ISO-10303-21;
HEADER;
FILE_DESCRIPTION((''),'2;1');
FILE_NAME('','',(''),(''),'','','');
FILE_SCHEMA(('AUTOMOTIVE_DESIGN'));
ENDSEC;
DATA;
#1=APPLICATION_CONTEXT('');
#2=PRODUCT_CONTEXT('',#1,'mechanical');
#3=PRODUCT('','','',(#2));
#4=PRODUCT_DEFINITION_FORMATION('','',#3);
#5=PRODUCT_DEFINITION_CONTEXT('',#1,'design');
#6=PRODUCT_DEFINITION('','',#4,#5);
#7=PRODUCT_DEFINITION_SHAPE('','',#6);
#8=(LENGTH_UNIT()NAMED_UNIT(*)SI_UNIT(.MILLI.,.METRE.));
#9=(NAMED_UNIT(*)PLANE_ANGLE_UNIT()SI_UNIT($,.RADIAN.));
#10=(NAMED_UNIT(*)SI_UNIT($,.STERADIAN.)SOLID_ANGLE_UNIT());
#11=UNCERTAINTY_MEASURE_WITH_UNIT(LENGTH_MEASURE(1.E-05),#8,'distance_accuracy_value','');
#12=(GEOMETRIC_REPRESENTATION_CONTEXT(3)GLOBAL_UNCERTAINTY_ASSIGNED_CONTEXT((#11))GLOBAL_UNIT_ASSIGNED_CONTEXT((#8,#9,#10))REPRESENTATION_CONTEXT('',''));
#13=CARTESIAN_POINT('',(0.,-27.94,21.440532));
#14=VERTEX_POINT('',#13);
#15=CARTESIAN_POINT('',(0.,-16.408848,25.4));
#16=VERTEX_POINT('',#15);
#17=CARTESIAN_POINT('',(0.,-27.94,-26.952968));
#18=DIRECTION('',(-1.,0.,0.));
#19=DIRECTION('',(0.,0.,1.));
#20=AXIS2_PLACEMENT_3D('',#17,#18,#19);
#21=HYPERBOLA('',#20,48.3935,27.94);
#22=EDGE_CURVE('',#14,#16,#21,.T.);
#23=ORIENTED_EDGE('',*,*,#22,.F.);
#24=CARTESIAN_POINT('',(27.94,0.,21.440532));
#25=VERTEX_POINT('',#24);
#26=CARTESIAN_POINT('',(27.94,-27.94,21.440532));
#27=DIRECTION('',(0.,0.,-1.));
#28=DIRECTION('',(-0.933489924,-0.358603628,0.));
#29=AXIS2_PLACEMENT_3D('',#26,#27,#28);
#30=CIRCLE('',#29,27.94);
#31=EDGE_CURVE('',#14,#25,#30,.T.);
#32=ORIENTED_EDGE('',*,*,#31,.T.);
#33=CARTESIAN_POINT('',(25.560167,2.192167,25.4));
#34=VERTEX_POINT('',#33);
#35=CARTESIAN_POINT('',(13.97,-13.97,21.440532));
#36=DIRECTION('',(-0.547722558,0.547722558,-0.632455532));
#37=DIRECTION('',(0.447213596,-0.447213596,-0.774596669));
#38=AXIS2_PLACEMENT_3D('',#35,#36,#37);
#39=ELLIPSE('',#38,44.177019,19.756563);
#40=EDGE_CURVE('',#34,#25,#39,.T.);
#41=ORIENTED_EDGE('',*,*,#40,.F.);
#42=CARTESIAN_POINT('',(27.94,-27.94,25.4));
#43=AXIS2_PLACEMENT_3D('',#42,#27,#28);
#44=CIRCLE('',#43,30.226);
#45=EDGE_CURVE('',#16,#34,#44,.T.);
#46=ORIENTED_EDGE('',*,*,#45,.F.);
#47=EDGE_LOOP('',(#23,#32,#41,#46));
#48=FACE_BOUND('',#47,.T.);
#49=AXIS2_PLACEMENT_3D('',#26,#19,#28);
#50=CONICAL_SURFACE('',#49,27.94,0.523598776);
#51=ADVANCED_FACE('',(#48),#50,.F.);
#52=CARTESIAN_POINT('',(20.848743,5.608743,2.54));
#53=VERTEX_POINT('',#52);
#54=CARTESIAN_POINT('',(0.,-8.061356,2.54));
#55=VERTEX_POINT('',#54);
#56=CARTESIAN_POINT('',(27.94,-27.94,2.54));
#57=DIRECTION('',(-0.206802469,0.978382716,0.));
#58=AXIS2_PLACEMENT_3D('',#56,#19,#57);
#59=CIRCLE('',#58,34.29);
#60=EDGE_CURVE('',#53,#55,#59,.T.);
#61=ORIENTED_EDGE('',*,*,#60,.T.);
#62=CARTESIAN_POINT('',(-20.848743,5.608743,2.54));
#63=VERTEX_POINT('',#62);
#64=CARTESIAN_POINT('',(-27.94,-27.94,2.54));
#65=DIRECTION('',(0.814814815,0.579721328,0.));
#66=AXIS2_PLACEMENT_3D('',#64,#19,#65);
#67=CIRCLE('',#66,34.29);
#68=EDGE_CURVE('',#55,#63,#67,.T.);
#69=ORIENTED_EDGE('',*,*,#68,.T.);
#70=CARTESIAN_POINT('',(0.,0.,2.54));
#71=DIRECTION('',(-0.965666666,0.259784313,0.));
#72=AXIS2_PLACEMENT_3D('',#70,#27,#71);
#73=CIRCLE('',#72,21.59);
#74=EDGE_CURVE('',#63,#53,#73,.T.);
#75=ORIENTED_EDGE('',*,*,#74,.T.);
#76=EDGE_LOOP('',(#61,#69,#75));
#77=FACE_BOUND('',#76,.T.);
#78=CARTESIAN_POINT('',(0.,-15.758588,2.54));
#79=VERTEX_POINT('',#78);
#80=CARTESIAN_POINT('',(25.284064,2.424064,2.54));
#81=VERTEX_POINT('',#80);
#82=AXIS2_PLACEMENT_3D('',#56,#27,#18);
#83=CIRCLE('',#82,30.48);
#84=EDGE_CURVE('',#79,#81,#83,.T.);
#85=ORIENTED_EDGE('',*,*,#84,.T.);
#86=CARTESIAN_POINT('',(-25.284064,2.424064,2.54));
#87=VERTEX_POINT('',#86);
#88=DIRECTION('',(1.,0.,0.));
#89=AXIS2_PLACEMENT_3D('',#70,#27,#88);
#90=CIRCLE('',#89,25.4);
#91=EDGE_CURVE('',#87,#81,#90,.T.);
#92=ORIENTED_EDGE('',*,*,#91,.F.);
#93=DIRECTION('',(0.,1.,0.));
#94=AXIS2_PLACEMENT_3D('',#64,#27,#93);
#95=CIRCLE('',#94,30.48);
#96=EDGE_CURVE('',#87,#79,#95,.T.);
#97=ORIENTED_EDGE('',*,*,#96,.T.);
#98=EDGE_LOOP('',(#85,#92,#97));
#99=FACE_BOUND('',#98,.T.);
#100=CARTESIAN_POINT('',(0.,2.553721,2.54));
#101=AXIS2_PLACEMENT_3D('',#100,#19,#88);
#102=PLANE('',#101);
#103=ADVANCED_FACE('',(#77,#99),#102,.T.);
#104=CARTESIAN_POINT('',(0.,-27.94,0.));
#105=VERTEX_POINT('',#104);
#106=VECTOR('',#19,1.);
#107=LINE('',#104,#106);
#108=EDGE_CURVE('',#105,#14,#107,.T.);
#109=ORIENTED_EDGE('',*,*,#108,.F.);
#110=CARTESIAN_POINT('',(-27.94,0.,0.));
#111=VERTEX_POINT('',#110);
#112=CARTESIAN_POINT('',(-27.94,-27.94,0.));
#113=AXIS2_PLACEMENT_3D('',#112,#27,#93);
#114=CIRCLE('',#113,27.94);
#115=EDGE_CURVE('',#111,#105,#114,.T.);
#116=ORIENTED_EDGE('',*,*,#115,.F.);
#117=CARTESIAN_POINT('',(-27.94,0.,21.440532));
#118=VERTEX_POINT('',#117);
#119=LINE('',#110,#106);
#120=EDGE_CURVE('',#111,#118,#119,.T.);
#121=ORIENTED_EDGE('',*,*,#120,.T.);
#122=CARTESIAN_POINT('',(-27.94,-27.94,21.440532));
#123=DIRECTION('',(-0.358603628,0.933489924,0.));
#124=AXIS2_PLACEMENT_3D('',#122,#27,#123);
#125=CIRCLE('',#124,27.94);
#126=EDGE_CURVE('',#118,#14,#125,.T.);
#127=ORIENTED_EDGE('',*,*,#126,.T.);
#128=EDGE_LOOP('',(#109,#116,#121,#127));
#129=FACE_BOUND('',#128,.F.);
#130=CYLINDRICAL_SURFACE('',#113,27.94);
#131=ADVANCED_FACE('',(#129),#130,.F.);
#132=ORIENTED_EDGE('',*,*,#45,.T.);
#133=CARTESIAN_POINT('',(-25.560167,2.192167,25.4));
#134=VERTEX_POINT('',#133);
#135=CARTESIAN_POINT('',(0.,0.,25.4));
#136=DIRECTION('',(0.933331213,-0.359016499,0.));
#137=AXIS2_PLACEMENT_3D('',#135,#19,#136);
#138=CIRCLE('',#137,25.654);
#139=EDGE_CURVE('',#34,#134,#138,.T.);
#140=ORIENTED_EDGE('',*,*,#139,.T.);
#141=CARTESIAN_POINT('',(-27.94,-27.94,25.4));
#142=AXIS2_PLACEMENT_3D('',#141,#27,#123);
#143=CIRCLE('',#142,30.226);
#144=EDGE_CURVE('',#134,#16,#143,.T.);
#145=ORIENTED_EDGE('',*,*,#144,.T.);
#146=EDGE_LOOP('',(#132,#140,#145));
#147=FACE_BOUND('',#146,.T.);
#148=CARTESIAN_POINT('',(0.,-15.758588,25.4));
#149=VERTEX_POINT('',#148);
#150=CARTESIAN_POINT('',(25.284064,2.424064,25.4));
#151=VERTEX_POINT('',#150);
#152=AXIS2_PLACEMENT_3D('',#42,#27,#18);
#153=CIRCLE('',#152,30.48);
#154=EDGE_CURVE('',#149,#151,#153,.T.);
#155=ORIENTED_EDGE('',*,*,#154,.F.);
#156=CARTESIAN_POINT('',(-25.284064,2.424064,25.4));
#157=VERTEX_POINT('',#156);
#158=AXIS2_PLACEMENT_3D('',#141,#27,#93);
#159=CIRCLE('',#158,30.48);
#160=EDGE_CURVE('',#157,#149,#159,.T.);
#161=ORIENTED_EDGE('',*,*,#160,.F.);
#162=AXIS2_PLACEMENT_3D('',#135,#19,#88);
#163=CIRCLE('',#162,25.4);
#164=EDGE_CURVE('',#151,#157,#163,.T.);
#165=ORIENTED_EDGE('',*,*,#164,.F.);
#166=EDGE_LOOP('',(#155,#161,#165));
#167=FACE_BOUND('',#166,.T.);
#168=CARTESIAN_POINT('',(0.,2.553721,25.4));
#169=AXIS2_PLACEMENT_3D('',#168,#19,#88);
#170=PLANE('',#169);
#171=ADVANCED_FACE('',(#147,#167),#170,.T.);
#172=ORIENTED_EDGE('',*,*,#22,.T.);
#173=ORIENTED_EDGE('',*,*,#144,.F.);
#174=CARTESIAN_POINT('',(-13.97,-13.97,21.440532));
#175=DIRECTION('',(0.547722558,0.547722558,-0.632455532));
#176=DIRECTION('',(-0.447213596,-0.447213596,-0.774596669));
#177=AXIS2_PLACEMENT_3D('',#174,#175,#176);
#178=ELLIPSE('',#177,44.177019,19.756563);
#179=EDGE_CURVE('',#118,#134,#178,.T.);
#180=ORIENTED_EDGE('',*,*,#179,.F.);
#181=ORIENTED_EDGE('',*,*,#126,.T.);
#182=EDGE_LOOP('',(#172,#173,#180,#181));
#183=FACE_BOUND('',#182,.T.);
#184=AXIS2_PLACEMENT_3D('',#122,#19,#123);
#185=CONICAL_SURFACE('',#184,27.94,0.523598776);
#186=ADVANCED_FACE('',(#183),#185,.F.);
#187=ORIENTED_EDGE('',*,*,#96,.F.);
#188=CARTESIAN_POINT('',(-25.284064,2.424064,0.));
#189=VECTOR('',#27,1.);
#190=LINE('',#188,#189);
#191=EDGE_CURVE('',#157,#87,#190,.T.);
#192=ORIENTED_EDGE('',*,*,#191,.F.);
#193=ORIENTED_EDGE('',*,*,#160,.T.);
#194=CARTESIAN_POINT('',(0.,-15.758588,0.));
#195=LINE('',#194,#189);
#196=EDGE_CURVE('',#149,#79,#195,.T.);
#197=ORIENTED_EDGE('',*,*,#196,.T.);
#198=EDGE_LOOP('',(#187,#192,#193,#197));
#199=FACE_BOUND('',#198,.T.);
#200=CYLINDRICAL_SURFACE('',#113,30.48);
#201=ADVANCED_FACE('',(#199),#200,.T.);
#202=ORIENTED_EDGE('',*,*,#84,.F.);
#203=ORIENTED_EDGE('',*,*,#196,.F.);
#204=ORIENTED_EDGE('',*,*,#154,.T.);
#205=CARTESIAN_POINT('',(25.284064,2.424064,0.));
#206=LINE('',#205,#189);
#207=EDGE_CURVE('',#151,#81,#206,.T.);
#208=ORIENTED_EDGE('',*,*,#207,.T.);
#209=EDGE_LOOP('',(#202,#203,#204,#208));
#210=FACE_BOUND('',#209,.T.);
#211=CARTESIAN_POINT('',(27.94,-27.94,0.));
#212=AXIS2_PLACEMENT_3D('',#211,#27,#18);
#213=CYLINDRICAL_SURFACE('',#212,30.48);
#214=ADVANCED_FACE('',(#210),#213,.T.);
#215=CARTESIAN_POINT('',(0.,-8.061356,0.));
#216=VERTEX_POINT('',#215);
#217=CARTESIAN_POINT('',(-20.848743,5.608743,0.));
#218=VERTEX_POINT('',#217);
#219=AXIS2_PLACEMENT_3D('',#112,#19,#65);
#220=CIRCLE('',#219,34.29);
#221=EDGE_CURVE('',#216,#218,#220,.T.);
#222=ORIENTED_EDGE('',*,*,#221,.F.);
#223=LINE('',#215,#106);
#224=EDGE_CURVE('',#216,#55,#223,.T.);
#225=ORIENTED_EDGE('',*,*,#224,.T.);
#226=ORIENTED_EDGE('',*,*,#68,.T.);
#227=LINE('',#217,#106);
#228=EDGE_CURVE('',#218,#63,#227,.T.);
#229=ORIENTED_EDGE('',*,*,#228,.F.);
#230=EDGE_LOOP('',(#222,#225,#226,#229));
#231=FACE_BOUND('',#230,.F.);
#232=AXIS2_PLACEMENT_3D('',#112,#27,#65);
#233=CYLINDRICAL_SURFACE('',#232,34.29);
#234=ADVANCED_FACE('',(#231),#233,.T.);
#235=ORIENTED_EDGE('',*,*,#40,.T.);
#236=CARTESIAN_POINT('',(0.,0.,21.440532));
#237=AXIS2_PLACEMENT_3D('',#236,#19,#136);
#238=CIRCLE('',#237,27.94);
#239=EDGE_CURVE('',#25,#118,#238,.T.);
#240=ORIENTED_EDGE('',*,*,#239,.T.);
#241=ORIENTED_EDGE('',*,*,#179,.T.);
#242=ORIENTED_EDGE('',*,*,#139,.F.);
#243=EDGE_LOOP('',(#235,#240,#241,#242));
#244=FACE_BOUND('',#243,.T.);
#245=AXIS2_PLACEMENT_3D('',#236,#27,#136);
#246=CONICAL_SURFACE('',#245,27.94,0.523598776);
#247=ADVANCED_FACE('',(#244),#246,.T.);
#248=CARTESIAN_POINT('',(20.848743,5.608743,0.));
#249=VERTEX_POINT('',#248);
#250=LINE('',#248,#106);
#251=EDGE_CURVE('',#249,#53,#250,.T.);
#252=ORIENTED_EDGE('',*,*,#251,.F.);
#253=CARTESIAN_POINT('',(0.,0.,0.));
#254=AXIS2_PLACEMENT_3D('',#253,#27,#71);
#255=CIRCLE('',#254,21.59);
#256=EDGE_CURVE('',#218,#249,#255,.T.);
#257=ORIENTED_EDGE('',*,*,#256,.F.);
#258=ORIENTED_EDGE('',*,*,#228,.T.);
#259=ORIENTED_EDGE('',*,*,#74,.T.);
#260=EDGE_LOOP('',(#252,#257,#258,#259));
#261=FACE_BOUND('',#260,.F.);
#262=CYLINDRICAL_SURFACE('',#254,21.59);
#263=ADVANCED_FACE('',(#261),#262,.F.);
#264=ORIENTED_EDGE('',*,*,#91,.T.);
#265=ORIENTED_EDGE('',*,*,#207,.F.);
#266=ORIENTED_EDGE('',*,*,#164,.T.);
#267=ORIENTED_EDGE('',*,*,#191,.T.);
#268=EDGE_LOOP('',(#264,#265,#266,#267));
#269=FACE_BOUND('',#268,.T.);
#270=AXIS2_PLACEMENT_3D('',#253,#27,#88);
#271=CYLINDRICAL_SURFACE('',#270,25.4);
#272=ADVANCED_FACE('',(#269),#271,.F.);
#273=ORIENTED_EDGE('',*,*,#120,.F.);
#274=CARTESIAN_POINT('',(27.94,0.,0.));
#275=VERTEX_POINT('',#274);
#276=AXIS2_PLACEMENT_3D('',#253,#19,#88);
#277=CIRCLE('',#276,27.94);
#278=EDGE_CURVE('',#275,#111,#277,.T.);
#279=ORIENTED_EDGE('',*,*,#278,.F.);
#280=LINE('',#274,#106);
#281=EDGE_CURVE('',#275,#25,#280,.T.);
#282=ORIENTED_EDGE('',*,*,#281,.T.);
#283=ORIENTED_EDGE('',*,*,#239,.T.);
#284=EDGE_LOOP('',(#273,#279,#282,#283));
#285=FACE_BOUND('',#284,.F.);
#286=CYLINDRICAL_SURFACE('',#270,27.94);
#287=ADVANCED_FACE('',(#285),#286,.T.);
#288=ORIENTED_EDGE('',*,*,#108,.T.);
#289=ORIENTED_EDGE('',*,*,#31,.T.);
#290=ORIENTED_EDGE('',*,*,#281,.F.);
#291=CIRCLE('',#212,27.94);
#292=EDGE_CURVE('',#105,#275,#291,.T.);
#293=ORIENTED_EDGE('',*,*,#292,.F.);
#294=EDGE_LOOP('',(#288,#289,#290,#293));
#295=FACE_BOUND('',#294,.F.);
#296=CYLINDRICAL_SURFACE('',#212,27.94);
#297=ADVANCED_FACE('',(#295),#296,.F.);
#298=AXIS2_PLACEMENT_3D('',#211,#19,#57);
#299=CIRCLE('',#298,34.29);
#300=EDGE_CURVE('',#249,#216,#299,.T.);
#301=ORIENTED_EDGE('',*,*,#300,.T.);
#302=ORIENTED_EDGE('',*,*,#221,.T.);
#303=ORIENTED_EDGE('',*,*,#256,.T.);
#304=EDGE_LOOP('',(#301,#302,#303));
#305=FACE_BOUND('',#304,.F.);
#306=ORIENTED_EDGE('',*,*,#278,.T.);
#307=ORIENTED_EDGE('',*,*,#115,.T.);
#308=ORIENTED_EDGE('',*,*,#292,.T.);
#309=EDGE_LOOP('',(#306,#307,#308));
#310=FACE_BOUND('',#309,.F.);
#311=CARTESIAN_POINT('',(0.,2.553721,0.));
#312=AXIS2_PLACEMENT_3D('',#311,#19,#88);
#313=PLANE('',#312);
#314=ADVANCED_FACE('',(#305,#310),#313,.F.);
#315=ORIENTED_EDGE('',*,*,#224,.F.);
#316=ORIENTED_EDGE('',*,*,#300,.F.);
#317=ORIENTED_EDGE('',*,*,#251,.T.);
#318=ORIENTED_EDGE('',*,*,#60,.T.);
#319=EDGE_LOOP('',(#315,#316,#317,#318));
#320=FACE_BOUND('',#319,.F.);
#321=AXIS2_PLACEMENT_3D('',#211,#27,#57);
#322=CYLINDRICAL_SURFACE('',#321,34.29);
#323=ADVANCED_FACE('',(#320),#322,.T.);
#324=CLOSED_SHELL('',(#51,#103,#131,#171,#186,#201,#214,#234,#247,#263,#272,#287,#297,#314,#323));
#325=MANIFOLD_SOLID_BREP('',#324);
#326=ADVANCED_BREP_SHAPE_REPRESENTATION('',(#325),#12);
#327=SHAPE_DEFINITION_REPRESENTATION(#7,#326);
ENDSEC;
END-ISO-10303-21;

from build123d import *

# Parameters (mm, degrees)
F1_DEPTH    = 25.4
F2_T        = -2.54
F3_T2_ANGLE = 222.0796162883
F3_T4_ANGLE = 132.0289295476
F3_T6_ANGLE = 132.0289295476
F5_DEPTH    = 2.54


# Not quite as in the source:
# - a fillet or chamfer that OpenCascade refuses, or shapes differently, is made with other operations: its cross-section is extruded or revolved along the edge and cut away or added


with BuildPart() as f1:
    # F0 (on Top) → F1 (new body)
    with BuildSketch(Plane.XY):
        with BuildLine():
            ThreePointArc((-27.94, 0), (-8.1834365336, -8.1834365336), (0, -27.94))
            ThreePointArc((0, -27.94), (8.1834365336, -8.1834365336), (27.94, 0))
            ThreePointArc((27.94, 0), (0, 27.94), (-27.94, 0))
        make_face()
    extrude(amount=F1_DEPTH)

    # F2
    f2_openings = [f1.faces().sort_by_distance(p)[0] for p in [
        (0, 7.974025, 25.4),
    ]]
    offset(amount=F2_T, openings=f2_openings)

    # F3: chamfer of 2.286 x 3.9594681461 on 3 edges, made by hand

    # F3_s1 → F3_t2 (revolve, cut)
    with BuildSketch(Plane(origin=(0, 0, 0), x_dir=(0, 0, 1), z_dir=(-0.359016499, -0.9333312132, 0))):
        Polygon((21.4405318539, -27.94), (25.4, -25.654), (25.4, -27.94), align=None)
    revolve(axis=Axis((0, 0, 25.4), (0, 0, 1)), revolution_arc=F3_T2_ANGLE, mode=Mode.SUBTRACT)

    # F3_s3 → F3_t4 (revolve, cut)
    with BuildSketch(Plane(origin=(-33.70000734, -12.9459832215, 0), x_dir=(0, 0, 1), z_dir=(-0.9334899239, -0.3586036279, 0))):
        Polygon((21.4405318539, 11.8776768894), (25.4, 14.1636768894), (25.4, 11.8776768894), align=None)
    revolve(axis=Axis((-27.94, -27.94, 25.4), (0, 0, -1)), revolution_arc=F3_T4_ANGLE, mode=Mode.SUBTRACT)

    # F3_s5 → F3_t6 (revolve, cut)
    with BuildSketch(Plane(origin=(12.9459832215, -33.70000734, 0), x_dir=(0, 0, 1), z_dir=(0.3586036279, -0.9334899239, 0))):
        Polygon((21.4405318539, 11.8776768894), (25.4, 14.1636768894), (25.4, 11.8776768894), align=None)
    revolve(axis=Axis((27.94, -27.94, 25.4), (0, 0, -1)), revolution_arc=F3_T6_ANGLE, mode=Mode.SUBTRACT)

    # F4 (on face) → F5 (cut, through all)
    with BuildSketch(Plane(origin=(0, 0, 0), x_dir=(1, 0, 0), z_dir=(0, 0, -1))):
        with BuildLine():
            ThreePointArc((-20.8487433266, -5.6087433266), (0, -21.59), (20.8487433266, -5.6087433266))
            ThreePointArc((20.8487433266, -5.6087433266), (9.138001762, -0.7355812889), (0, 8.06135568))
            ThreePointArc((0, 8.06135568), (-9.138001762, -0.7355812889), (-20.8487433266, -5.6087433266))
        make_face()
    extrude(amount=-F5_DEPTH, mode=Mode.SUBTRACT)


solid = f1.part
